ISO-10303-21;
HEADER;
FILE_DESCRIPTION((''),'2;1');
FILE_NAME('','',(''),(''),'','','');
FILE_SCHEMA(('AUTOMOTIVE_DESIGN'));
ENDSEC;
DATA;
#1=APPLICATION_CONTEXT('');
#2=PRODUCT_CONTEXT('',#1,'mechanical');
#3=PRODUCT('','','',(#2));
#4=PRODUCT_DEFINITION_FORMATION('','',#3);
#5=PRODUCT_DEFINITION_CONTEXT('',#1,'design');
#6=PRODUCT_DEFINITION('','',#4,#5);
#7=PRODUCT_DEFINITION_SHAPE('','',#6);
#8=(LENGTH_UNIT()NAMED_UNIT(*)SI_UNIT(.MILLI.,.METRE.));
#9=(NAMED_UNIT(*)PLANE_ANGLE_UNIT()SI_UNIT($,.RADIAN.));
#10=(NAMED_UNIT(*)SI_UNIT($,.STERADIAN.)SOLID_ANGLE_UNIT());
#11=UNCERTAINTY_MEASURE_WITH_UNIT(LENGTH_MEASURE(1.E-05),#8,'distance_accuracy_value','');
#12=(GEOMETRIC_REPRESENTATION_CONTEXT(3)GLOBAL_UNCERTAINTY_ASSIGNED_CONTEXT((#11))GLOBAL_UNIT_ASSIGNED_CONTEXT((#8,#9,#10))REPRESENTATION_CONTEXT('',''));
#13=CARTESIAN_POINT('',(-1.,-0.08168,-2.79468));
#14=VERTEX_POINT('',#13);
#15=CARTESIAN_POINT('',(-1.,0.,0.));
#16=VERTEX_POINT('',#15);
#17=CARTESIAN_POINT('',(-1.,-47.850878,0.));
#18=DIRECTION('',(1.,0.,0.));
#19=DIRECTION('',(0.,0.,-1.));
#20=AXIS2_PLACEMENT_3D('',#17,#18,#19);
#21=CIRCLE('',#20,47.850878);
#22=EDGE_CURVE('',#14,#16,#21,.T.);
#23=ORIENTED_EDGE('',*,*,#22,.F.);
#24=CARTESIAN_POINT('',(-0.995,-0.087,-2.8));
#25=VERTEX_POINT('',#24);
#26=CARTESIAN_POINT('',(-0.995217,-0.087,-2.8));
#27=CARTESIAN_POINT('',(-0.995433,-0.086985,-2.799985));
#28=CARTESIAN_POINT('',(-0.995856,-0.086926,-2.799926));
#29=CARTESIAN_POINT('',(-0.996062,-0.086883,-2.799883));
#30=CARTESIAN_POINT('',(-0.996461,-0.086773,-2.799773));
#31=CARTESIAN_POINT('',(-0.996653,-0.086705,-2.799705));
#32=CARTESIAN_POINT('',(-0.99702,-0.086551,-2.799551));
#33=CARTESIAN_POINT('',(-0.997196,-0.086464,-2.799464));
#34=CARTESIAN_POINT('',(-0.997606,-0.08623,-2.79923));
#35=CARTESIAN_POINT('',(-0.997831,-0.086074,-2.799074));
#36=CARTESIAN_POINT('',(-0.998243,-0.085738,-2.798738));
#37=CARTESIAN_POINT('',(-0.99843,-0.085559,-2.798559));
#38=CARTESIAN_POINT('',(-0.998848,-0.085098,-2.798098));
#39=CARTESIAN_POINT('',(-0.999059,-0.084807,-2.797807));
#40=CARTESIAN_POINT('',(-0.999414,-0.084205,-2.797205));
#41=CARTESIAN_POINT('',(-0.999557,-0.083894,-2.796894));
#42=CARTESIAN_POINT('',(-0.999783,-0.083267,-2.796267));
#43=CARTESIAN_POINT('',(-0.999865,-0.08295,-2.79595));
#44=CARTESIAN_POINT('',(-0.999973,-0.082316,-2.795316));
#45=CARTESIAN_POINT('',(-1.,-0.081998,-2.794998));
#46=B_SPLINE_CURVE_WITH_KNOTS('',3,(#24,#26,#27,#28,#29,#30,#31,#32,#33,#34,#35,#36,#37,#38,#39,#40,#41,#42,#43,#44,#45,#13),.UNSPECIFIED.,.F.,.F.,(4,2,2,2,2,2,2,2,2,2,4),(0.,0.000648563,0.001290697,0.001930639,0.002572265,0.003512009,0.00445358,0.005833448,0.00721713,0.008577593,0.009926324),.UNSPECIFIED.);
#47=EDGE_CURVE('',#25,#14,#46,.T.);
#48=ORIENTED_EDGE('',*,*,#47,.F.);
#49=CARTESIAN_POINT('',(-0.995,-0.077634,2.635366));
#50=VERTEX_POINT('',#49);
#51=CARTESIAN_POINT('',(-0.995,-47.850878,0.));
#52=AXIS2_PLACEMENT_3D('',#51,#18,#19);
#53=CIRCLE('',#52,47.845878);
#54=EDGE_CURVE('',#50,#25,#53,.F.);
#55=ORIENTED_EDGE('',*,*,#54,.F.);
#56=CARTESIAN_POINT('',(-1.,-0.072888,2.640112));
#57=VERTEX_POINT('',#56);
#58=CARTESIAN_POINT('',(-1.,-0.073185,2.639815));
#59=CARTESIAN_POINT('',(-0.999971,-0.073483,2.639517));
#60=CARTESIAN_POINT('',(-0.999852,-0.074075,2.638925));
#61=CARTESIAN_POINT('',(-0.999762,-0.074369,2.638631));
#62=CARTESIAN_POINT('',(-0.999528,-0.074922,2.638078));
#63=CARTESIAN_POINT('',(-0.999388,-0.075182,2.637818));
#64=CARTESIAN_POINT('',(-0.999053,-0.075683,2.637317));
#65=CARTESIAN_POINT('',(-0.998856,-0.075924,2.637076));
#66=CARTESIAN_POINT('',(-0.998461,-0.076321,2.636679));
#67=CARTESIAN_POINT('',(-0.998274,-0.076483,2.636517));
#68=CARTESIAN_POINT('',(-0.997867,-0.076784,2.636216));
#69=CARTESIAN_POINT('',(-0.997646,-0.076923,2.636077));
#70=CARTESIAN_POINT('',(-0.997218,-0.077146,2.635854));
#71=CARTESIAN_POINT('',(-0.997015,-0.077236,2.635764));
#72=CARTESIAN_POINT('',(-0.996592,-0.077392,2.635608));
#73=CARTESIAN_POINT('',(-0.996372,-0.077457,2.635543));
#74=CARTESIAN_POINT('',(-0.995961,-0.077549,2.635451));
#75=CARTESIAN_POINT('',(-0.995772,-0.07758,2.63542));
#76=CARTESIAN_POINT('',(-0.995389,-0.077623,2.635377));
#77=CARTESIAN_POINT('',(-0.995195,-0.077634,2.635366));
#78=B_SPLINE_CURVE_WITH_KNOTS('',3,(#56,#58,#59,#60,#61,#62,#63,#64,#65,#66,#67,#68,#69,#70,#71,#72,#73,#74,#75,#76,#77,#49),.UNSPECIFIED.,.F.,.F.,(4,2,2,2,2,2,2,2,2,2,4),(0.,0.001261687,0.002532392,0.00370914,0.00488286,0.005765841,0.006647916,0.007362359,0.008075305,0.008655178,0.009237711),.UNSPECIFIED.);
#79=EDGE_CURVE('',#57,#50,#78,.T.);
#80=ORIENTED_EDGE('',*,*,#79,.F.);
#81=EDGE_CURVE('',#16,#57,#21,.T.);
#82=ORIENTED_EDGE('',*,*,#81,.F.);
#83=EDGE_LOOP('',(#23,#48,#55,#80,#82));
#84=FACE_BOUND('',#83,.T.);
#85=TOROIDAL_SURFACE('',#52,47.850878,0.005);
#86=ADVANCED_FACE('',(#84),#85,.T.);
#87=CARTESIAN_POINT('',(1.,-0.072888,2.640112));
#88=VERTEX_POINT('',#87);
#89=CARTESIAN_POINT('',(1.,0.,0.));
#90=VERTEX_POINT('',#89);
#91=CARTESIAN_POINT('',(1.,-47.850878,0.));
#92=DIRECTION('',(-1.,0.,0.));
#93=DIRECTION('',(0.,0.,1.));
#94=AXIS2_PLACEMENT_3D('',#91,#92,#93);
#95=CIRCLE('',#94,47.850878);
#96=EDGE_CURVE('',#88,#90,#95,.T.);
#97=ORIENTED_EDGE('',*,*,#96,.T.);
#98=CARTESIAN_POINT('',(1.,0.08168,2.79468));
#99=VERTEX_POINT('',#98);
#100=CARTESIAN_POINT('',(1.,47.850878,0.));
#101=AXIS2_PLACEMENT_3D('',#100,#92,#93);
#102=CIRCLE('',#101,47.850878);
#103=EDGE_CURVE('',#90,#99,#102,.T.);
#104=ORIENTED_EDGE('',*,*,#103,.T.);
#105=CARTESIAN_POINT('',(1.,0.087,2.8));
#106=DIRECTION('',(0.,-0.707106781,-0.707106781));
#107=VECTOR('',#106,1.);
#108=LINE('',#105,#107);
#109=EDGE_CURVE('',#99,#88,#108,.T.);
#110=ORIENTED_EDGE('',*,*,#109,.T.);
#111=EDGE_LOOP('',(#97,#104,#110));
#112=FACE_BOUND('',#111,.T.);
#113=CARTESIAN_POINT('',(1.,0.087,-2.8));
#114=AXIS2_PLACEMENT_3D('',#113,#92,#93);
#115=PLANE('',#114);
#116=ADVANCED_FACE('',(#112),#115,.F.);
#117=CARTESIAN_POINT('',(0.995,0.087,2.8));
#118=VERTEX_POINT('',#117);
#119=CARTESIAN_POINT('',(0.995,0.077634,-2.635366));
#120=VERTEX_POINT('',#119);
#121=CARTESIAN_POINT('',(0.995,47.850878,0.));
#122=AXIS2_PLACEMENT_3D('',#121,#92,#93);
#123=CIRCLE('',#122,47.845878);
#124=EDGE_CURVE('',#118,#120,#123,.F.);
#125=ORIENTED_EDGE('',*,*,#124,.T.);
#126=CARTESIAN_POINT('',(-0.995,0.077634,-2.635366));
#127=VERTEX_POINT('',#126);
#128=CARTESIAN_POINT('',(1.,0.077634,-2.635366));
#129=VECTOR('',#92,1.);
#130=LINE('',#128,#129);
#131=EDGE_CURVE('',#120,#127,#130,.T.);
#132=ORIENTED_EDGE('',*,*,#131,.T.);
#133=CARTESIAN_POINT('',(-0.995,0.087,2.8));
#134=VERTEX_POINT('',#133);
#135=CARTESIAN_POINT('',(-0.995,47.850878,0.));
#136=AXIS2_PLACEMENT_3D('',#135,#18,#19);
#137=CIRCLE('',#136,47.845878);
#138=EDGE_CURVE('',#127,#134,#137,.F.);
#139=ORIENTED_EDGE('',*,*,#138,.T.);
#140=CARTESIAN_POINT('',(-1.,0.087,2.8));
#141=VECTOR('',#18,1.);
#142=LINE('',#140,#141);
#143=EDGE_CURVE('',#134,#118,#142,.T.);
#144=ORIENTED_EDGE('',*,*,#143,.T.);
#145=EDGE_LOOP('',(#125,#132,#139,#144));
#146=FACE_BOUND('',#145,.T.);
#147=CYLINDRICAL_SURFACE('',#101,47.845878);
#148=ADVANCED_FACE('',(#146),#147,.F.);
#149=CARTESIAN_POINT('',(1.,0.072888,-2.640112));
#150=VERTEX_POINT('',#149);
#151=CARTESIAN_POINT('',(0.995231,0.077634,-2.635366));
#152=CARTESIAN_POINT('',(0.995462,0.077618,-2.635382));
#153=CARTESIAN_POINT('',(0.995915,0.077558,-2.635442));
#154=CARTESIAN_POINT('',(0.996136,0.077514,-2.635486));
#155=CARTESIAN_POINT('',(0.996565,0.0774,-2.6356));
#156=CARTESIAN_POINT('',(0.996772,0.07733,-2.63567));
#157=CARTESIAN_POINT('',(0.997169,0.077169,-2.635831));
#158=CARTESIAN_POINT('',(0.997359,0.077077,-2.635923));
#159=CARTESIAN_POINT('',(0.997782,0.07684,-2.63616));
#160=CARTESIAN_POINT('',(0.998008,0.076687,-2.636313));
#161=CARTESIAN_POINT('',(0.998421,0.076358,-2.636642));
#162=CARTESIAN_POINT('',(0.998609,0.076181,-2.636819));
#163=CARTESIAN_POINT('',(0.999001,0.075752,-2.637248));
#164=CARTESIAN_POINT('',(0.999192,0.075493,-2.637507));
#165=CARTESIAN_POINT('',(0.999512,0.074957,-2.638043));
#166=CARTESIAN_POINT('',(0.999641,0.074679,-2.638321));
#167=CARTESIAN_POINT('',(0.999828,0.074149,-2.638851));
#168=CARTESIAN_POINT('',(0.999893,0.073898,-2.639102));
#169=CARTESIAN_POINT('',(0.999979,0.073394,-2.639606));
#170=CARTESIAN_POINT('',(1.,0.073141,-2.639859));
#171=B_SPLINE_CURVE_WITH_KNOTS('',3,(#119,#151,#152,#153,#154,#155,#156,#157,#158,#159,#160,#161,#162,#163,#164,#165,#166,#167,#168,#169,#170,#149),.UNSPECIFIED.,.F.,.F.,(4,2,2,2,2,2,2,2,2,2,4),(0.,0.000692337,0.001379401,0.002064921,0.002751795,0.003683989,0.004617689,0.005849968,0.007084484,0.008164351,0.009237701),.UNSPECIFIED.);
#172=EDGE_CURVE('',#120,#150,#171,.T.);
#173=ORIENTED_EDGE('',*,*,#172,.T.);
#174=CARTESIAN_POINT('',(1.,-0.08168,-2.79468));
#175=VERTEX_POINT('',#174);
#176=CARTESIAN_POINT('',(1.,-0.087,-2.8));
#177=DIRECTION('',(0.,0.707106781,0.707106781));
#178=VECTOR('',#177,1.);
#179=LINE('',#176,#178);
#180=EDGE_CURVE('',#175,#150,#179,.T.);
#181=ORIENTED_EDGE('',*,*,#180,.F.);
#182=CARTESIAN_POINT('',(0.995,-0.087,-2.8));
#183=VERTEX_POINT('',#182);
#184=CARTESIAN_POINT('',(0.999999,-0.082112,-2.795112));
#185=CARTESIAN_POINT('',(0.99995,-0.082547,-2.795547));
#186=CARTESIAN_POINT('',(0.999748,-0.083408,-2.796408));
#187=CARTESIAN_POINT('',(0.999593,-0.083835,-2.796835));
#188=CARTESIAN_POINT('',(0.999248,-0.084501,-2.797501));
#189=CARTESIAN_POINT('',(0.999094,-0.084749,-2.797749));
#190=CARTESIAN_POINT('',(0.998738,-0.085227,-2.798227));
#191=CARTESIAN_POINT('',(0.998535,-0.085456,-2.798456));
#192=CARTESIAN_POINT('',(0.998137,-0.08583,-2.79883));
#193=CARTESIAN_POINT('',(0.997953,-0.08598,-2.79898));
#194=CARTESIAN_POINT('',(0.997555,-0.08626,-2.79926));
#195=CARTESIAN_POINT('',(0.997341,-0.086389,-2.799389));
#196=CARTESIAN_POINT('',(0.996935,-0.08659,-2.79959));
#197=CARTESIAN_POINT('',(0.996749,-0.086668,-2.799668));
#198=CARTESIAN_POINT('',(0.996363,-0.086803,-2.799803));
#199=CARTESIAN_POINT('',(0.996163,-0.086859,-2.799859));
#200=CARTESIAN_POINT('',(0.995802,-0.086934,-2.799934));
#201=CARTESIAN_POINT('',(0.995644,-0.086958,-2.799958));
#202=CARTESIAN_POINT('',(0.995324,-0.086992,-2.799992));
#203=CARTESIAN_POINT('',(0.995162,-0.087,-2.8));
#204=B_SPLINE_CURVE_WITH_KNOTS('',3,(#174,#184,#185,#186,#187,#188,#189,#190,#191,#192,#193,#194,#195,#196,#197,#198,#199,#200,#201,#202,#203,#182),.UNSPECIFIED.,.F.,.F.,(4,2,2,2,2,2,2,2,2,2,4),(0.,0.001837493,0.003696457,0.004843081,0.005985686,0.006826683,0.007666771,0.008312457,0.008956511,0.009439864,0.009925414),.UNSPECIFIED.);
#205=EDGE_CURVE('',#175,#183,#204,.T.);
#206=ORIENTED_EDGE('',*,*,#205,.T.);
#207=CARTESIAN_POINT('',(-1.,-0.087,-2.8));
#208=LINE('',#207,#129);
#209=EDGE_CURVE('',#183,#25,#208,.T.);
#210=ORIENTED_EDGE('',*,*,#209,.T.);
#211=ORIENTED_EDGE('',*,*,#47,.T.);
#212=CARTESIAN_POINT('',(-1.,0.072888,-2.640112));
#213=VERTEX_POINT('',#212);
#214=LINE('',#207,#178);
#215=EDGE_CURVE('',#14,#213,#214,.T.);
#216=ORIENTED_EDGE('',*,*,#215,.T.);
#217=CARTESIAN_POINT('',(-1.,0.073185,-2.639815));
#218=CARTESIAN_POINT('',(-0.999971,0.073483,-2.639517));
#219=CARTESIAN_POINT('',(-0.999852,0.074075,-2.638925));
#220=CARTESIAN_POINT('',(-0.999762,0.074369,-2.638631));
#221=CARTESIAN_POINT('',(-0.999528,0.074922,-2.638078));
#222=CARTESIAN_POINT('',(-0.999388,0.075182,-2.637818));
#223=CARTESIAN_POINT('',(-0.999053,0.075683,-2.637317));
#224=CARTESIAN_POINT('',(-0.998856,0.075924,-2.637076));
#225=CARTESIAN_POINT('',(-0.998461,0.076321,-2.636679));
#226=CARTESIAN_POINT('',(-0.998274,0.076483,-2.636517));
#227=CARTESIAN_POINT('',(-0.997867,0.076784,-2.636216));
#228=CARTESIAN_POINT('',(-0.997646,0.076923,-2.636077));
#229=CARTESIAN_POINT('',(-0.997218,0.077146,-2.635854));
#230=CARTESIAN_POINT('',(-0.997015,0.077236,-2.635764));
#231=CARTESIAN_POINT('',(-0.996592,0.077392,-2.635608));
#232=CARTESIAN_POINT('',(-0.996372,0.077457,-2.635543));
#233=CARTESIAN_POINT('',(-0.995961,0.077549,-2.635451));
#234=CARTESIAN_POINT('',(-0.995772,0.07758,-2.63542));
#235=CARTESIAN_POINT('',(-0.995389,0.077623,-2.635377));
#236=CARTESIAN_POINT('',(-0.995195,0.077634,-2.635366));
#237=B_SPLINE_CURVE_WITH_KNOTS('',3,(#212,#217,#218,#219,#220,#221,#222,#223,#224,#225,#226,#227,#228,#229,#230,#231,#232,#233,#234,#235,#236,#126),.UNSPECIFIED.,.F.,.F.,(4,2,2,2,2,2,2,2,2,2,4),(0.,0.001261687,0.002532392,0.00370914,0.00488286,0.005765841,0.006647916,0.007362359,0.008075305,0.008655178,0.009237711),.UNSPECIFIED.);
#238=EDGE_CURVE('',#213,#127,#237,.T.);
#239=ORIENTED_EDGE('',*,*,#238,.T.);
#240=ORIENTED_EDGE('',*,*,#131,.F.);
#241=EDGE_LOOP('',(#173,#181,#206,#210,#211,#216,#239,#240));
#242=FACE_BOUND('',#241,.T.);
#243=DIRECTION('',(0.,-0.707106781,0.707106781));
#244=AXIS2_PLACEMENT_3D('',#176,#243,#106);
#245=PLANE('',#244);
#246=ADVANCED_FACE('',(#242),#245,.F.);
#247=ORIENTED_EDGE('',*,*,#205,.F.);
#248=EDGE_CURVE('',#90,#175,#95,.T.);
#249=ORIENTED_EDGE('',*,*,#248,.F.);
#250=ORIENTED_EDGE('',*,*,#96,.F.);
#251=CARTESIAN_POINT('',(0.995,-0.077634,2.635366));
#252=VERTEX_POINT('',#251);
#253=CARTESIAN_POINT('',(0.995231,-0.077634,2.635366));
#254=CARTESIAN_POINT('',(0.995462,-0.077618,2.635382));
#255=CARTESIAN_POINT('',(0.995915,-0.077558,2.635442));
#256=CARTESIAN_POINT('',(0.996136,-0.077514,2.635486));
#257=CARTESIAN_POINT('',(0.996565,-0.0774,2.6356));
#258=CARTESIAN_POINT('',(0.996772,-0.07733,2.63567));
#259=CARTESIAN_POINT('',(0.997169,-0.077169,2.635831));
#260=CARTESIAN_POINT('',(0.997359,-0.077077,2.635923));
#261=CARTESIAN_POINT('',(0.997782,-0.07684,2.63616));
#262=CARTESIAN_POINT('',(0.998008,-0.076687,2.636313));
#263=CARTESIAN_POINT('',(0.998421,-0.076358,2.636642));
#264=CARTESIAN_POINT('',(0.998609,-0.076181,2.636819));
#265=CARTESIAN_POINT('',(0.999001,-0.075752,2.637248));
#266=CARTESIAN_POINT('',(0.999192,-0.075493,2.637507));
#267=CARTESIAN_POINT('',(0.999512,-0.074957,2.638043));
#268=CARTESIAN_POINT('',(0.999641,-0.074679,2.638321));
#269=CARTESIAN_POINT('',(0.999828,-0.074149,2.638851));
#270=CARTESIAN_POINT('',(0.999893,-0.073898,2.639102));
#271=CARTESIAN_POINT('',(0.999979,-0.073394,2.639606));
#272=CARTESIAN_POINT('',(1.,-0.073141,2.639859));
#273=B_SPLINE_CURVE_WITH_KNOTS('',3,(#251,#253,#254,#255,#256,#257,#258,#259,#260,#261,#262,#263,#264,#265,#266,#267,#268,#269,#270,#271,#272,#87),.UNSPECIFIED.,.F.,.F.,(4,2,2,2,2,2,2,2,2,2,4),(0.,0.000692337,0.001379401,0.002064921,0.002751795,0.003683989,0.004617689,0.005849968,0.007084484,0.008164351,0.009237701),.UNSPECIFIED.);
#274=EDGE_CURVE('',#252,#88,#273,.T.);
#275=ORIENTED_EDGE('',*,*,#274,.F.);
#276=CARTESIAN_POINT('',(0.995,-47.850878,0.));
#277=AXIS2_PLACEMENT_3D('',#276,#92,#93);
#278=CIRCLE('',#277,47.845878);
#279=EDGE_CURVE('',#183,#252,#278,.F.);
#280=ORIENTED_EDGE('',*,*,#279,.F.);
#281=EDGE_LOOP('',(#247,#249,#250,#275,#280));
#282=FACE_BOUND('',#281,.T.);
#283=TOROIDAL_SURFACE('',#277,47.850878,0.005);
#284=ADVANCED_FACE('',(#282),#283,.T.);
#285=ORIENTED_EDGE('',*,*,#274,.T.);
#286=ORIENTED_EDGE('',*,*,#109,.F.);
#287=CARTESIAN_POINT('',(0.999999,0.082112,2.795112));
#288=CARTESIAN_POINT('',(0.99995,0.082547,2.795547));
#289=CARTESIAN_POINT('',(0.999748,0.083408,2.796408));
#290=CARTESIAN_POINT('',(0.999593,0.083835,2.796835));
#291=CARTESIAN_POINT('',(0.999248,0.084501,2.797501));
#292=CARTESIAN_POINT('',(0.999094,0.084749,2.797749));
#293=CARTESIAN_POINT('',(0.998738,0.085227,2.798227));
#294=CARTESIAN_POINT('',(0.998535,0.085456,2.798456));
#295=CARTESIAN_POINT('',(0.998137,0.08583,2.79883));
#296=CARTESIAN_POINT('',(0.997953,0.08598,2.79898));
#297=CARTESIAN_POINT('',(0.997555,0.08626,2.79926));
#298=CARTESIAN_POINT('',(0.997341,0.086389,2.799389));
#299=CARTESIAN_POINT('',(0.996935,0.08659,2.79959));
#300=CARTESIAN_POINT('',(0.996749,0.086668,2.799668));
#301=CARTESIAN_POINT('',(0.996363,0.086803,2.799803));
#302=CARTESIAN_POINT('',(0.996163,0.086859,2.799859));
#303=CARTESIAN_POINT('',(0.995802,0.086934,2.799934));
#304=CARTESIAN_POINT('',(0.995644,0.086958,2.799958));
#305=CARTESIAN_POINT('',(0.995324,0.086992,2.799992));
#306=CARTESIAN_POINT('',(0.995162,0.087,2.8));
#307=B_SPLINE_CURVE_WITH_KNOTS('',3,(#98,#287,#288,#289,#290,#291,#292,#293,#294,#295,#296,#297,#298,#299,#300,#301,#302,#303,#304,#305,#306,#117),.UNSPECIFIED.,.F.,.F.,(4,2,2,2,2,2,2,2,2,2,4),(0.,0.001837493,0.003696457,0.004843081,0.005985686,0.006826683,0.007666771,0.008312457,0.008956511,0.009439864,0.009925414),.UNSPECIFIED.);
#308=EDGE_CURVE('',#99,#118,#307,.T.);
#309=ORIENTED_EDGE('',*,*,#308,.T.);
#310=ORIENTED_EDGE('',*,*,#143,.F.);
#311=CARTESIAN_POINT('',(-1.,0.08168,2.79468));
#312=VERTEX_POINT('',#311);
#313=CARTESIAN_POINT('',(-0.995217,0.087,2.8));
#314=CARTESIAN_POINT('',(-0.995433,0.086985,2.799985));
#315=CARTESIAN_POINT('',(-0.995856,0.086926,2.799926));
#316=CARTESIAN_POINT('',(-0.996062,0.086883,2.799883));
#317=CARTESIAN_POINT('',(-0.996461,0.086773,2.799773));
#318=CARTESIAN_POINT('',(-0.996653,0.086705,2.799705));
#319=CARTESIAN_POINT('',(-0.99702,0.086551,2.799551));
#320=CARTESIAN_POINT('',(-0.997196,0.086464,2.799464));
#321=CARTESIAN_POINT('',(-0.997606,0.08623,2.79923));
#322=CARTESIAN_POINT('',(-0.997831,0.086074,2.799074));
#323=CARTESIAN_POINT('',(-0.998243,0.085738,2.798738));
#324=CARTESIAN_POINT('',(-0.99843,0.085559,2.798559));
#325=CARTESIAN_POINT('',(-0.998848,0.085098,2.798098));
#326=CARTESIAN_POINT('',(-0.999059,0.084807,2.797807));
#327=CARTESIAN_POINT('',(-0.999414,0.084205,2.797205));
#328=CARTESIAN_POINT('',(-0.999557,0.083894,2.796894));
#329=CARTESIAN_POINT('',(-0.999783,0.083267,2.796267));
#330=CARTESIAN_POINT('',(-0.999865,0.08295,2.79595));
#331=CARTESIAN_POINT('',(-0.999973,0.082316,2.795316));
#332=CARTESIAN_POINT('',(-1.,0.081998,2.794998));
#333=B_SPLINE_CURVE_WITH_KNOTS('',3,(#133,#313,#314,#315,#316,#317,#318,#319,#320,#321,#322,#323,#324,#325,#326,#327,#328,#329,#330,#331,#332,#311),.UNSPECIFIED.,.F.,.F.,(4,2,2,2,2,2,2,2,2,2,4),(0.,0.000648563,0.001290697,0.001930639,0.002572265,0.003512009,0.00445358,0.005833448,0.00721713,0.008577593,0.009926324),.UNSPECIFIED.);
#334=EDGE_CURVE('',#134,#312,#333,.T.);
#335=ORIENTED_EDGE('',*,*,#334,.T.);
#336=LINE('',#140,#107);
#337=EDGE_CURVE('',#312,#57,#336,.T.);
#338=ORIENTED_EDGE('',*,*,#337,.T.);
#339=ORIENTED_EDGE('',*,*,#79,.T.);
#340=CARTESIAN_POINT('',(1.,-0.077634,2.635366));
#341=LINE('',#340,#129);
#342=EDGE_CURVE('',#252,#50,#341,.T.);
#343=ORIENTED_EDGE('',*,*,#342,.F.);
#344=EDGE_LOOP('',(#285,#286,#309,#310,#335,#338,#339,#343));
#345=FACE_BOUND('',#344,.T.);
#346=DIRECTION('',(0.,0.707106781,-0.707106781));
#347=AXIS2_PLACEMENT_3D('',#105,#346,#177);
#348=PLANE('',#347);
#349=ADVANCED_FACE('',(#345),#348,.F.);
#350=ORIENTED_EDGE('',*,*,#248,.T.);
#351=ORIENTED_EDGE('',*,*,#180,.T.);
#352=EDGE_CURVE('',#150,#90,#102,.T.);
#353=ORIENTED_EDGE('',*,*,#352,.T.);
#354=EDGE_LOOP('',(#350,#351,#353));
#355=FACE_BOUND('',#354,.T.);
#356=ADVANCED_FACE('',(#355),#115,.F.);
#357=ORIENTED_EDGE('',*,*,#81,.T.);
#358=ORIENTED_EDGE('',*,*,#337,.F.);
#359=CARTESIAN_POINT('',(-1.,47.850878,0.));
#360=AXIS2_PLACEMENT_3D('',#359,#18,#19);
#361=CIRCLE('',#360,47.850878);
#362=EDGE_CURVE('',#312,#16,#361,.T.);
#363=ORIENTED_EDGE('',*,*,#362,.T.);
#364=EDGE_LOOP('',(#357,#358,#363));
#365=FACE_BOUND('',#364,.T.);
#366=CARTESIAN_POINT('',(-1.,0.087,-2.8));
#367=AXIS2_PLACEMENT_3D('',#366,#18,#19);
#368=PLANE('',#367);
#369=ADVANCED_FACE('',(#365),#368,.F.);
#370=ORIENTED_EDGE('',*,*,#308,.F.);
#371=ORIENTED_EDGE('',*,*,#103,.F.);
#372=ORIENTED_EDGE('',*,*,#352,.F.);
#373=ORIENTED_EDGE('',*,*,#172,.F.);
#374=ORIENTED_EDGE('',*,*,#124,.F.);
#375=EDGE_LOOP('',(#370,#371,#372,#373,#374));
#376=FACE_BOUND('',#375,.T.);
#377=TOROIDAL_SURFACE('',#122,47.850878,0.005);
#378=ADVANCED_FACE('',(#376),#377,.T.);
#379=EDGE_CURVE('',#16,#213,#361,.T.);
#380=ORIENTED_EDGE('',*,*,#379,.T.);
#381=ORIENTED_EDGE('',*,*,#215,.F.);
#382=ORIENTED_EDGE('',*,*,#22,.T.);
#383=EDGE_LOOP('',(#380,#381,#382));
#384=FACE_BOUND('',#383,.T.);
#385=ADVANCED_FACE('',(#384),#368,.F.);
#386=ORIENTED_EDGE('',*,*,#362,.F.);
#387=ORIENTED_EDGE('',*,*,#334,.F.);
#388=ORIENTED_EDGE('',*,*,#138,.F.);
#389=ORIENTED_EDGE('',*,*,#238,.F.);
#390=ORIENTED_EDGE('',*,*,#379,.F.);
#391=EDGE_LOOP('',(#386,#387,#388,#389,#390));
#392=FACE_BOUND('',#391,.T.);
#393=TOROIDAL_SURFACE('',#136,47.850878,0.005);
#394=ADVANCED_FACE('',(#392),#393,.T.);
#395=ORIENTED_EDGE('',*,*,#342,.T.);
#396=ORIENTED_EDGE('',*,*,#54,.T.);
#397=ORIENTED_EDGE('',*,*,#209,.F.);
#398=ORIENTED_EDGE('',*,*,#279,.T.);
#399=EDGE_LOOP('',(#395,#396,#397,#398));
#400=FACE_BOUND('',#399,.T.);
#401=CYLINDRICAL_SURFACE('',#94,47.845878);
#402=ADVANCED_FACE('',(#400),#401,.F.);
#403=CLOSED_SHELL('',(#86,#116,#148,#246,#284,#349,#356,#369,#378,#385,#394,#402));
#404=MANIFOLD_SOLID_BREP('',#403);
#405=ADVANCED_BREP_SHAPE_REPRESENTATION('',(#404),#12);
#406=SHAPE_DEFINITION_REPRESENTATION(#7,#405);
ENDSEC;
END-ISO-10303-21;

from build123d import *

# Parameters (mm, degrees)
SKETCH1_W           = 2
SKETCH1_H           = 5.6
BOSS_EXTRUDE1_DEPTH = 0.087
CUT_EXTRUDE1_DEPTH  = 4.442029779
CUT_EXTRUDE2_DEPTH  = 4.442029779
FILLET1_R           = 0.005


with BuildPart() as part:
    # Sketch1 → Boss-Extrude1 (new, symmetric)
    with BuildSketch(Plane(origin=(0, 0, 0), x_dir=(1, 0, 0), z_dir=(0, 1, 0))):
        Rectangle(SKETCH1_W, SKETCH1_H)
    extrude(amount=BOSS_EXTRUDE1_DEPTH, both=True)

    # Sketch3 → Cut-Extrude1 (cut, through all)
    with BuildSketch(Plane.ZY.offset(1)):
        with BuildLine():
            Line((-2.8, 0.087), (2.8, 0.087))
            ThreePointArc((2.8, 0.087), (0, 0.005), (-2.8, 0.087))
        make_face()
        with BuildLine():
            Line((-2.8, -0.087), (2.8, -0.087))
            ThreePointArc((2.8, -0.087), (0, -0.005), (-2.8, -0.087))
        make_face()
    extrude(amount=-CUT_EXTRUDE1_DEPTH, mode=Mode.SUBTRACT)

    # Sketch4 → Cut-Extrude2 (cut, through all)
    with BuildSketch(Plane.ZY.offset(1)):
        Polygon((2.8, 0.087), (2.626, -0.087), (2.8, -0.087), align=None)
        Polygon((-2.8, -0.087), (-2.626, 0.087), (-2.8, 0.087), align=None)
    extrude(amount=-CUT_EXTRUDE2_DEPTH, mode=Mode.SUBTRACT)

    # Fillet1
    fillet1_edges = [part.edges().sort_by_distance(p)[0] for p in [
        (-1, 0.00507104, 0.082449888),
        (1, 0.00507104, 0.082449888),
        (-1, -0.00507104, -0.082449888),
        (1, -0.00507104, -0.082449888),
    ]]
    fillet(fillet1_edges, radius=FILLET1_R - 0.0001)  # a hair under: the kernel refuses the full size


solid = part.part
